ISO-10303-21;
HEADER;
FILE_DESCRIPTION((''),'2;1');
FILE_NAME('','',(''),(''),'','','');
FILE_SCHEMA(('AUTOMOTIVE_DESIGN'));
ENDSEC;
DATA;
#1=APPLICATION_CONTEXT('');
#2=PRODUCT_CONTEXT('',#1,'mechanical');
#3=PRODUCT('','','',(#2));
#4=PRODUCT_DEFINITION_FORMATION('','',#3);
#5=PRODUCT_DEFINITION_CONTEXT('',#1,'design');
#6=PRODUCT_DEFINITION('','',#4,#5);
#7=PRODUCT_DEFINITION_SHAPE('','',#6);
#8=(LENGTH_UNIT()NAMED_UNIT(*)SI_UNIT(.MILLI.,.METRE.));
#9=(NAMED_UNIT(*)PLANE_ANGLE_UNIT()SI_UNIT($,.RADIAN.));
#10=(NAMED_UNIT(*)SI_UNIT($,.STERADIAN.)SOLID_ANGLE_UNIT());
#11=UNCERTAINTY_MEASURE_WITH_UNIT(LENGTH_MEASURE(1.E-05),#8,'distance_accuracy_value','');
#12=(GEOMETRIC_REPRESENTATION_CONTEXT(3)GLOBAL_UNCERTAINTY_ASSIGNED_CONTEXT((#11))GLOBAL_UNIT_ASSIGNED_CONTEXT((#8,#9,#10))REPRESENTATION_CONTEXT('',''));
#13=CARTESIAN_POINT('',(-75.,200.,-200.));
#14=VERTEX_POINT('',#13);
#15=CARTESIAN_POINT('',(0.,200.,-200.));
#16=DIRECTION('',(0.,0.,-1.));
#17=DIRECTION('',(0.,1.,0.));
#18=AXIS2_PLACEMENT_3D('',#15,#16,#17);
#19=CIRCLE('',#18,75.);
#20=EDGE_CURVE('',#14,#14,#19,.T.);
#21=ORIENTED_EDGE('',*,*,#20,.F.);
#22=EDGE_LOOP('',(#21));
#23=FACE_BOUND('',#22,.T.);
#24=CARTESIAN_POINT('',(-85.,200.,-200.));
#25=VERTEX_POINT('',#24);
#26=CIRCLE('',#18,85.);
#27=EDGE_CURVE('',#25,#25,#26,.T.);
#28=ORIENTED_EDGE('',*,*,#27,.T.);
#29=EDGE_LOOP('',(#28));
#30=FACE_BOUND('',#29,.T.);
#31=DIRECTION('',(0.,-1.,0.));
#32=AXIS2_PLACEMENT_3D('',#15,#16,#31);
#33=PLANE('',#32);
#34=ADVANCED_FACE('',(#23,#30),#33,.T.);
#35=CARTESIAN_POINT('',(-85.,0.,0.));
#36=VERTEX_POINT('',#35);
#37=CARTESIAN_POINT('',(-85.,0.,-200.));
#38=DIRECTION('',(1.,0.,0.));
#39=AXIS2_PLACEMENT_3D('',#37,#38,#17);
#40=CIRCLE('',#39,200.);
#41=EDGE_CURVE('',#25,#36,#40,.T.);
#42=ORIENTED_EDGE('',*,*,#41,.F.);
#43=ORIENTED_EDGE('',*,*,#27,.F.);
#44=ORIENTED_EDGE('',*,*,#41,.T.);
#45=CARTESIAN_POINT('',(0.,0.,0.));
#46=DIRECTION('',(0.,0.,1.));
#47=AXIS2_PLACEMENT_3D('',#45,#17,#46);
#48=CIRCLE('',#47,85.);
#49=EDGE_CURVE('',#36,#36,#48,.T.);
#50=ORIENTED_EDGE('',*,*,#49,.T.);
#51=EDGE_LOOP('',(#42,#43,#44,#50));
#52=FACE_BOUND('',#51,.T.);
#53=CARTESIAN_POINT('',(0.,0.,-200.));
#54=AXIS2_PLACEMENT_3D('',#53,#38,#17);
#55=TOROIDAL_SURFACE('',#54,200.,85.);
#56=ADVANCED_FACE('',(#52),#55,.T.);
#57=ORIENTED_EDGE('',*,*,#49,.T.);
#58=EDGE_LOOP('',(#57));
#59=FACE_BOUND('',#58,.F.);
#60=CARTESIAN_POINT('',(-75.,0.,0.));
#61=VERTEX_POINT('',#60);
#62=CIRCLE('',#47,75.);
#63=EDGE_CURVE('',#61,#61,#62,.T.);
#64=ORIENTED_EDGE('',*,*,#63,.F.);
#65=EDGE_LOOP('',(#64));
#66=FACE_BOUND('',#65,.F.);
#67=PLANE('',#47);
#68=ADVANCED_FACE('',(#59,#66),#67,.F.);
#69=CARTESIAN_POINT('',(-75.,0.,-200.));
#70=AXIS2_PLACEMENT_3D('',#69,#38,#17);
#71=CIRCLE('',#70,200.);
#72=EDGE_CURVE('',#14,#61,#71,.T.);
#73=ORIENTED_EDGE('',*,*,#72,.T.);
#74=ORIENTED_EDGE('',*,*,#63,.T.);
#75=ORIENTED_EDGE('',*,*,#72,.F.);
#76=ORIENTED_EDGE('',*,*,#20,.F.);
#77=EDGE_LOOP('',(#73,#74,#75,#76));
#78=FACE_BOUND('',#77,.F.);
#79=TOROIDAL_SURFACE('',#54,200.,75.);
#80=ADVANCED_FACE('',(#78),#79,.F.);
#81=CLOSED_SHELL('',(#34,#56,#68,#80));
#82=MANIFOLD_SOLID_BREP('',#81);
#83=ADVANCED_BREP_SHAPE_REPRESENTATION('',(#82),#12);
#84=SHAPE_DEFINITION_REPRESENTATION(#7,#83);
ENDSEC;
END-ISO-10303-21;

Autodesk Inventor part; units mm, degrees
ref_plane "YZ Plane" through (0, 0, 0) normal (1, 0, 0) x (0, 1, 0)
ref_plane "XZ Plane" through (0, 0, 0) normal (0, 1, 0) x (-1, 0, 0)
ref_plane "XY Plane" through (0, 0, 0) normal (0, 0, 1) x (1, 0, 0)
sketch "Schizzo1" plane through (0, 0, 0) normal (0, 1, 0) x (-1, 0, 0)
  circle A0 centre (0, 0) radius 75
  circle A1 centre (0, 0) radius 85
  dimension "d0" = 150
  dimension "d1" = 170
sketch "Schizzo2" plane through (0, 0, 0) normal (1, 0, 0) x (0, 1, 0)
  arc A0 (200, -200) -> (0, 0) centre (0, -200) ccw
  dimension "d2" = 200
sweep "Sweep1" add profiles "Schizzo1" path "Schizzo2"
properties part number "05-22-2023 curva Sweep"
